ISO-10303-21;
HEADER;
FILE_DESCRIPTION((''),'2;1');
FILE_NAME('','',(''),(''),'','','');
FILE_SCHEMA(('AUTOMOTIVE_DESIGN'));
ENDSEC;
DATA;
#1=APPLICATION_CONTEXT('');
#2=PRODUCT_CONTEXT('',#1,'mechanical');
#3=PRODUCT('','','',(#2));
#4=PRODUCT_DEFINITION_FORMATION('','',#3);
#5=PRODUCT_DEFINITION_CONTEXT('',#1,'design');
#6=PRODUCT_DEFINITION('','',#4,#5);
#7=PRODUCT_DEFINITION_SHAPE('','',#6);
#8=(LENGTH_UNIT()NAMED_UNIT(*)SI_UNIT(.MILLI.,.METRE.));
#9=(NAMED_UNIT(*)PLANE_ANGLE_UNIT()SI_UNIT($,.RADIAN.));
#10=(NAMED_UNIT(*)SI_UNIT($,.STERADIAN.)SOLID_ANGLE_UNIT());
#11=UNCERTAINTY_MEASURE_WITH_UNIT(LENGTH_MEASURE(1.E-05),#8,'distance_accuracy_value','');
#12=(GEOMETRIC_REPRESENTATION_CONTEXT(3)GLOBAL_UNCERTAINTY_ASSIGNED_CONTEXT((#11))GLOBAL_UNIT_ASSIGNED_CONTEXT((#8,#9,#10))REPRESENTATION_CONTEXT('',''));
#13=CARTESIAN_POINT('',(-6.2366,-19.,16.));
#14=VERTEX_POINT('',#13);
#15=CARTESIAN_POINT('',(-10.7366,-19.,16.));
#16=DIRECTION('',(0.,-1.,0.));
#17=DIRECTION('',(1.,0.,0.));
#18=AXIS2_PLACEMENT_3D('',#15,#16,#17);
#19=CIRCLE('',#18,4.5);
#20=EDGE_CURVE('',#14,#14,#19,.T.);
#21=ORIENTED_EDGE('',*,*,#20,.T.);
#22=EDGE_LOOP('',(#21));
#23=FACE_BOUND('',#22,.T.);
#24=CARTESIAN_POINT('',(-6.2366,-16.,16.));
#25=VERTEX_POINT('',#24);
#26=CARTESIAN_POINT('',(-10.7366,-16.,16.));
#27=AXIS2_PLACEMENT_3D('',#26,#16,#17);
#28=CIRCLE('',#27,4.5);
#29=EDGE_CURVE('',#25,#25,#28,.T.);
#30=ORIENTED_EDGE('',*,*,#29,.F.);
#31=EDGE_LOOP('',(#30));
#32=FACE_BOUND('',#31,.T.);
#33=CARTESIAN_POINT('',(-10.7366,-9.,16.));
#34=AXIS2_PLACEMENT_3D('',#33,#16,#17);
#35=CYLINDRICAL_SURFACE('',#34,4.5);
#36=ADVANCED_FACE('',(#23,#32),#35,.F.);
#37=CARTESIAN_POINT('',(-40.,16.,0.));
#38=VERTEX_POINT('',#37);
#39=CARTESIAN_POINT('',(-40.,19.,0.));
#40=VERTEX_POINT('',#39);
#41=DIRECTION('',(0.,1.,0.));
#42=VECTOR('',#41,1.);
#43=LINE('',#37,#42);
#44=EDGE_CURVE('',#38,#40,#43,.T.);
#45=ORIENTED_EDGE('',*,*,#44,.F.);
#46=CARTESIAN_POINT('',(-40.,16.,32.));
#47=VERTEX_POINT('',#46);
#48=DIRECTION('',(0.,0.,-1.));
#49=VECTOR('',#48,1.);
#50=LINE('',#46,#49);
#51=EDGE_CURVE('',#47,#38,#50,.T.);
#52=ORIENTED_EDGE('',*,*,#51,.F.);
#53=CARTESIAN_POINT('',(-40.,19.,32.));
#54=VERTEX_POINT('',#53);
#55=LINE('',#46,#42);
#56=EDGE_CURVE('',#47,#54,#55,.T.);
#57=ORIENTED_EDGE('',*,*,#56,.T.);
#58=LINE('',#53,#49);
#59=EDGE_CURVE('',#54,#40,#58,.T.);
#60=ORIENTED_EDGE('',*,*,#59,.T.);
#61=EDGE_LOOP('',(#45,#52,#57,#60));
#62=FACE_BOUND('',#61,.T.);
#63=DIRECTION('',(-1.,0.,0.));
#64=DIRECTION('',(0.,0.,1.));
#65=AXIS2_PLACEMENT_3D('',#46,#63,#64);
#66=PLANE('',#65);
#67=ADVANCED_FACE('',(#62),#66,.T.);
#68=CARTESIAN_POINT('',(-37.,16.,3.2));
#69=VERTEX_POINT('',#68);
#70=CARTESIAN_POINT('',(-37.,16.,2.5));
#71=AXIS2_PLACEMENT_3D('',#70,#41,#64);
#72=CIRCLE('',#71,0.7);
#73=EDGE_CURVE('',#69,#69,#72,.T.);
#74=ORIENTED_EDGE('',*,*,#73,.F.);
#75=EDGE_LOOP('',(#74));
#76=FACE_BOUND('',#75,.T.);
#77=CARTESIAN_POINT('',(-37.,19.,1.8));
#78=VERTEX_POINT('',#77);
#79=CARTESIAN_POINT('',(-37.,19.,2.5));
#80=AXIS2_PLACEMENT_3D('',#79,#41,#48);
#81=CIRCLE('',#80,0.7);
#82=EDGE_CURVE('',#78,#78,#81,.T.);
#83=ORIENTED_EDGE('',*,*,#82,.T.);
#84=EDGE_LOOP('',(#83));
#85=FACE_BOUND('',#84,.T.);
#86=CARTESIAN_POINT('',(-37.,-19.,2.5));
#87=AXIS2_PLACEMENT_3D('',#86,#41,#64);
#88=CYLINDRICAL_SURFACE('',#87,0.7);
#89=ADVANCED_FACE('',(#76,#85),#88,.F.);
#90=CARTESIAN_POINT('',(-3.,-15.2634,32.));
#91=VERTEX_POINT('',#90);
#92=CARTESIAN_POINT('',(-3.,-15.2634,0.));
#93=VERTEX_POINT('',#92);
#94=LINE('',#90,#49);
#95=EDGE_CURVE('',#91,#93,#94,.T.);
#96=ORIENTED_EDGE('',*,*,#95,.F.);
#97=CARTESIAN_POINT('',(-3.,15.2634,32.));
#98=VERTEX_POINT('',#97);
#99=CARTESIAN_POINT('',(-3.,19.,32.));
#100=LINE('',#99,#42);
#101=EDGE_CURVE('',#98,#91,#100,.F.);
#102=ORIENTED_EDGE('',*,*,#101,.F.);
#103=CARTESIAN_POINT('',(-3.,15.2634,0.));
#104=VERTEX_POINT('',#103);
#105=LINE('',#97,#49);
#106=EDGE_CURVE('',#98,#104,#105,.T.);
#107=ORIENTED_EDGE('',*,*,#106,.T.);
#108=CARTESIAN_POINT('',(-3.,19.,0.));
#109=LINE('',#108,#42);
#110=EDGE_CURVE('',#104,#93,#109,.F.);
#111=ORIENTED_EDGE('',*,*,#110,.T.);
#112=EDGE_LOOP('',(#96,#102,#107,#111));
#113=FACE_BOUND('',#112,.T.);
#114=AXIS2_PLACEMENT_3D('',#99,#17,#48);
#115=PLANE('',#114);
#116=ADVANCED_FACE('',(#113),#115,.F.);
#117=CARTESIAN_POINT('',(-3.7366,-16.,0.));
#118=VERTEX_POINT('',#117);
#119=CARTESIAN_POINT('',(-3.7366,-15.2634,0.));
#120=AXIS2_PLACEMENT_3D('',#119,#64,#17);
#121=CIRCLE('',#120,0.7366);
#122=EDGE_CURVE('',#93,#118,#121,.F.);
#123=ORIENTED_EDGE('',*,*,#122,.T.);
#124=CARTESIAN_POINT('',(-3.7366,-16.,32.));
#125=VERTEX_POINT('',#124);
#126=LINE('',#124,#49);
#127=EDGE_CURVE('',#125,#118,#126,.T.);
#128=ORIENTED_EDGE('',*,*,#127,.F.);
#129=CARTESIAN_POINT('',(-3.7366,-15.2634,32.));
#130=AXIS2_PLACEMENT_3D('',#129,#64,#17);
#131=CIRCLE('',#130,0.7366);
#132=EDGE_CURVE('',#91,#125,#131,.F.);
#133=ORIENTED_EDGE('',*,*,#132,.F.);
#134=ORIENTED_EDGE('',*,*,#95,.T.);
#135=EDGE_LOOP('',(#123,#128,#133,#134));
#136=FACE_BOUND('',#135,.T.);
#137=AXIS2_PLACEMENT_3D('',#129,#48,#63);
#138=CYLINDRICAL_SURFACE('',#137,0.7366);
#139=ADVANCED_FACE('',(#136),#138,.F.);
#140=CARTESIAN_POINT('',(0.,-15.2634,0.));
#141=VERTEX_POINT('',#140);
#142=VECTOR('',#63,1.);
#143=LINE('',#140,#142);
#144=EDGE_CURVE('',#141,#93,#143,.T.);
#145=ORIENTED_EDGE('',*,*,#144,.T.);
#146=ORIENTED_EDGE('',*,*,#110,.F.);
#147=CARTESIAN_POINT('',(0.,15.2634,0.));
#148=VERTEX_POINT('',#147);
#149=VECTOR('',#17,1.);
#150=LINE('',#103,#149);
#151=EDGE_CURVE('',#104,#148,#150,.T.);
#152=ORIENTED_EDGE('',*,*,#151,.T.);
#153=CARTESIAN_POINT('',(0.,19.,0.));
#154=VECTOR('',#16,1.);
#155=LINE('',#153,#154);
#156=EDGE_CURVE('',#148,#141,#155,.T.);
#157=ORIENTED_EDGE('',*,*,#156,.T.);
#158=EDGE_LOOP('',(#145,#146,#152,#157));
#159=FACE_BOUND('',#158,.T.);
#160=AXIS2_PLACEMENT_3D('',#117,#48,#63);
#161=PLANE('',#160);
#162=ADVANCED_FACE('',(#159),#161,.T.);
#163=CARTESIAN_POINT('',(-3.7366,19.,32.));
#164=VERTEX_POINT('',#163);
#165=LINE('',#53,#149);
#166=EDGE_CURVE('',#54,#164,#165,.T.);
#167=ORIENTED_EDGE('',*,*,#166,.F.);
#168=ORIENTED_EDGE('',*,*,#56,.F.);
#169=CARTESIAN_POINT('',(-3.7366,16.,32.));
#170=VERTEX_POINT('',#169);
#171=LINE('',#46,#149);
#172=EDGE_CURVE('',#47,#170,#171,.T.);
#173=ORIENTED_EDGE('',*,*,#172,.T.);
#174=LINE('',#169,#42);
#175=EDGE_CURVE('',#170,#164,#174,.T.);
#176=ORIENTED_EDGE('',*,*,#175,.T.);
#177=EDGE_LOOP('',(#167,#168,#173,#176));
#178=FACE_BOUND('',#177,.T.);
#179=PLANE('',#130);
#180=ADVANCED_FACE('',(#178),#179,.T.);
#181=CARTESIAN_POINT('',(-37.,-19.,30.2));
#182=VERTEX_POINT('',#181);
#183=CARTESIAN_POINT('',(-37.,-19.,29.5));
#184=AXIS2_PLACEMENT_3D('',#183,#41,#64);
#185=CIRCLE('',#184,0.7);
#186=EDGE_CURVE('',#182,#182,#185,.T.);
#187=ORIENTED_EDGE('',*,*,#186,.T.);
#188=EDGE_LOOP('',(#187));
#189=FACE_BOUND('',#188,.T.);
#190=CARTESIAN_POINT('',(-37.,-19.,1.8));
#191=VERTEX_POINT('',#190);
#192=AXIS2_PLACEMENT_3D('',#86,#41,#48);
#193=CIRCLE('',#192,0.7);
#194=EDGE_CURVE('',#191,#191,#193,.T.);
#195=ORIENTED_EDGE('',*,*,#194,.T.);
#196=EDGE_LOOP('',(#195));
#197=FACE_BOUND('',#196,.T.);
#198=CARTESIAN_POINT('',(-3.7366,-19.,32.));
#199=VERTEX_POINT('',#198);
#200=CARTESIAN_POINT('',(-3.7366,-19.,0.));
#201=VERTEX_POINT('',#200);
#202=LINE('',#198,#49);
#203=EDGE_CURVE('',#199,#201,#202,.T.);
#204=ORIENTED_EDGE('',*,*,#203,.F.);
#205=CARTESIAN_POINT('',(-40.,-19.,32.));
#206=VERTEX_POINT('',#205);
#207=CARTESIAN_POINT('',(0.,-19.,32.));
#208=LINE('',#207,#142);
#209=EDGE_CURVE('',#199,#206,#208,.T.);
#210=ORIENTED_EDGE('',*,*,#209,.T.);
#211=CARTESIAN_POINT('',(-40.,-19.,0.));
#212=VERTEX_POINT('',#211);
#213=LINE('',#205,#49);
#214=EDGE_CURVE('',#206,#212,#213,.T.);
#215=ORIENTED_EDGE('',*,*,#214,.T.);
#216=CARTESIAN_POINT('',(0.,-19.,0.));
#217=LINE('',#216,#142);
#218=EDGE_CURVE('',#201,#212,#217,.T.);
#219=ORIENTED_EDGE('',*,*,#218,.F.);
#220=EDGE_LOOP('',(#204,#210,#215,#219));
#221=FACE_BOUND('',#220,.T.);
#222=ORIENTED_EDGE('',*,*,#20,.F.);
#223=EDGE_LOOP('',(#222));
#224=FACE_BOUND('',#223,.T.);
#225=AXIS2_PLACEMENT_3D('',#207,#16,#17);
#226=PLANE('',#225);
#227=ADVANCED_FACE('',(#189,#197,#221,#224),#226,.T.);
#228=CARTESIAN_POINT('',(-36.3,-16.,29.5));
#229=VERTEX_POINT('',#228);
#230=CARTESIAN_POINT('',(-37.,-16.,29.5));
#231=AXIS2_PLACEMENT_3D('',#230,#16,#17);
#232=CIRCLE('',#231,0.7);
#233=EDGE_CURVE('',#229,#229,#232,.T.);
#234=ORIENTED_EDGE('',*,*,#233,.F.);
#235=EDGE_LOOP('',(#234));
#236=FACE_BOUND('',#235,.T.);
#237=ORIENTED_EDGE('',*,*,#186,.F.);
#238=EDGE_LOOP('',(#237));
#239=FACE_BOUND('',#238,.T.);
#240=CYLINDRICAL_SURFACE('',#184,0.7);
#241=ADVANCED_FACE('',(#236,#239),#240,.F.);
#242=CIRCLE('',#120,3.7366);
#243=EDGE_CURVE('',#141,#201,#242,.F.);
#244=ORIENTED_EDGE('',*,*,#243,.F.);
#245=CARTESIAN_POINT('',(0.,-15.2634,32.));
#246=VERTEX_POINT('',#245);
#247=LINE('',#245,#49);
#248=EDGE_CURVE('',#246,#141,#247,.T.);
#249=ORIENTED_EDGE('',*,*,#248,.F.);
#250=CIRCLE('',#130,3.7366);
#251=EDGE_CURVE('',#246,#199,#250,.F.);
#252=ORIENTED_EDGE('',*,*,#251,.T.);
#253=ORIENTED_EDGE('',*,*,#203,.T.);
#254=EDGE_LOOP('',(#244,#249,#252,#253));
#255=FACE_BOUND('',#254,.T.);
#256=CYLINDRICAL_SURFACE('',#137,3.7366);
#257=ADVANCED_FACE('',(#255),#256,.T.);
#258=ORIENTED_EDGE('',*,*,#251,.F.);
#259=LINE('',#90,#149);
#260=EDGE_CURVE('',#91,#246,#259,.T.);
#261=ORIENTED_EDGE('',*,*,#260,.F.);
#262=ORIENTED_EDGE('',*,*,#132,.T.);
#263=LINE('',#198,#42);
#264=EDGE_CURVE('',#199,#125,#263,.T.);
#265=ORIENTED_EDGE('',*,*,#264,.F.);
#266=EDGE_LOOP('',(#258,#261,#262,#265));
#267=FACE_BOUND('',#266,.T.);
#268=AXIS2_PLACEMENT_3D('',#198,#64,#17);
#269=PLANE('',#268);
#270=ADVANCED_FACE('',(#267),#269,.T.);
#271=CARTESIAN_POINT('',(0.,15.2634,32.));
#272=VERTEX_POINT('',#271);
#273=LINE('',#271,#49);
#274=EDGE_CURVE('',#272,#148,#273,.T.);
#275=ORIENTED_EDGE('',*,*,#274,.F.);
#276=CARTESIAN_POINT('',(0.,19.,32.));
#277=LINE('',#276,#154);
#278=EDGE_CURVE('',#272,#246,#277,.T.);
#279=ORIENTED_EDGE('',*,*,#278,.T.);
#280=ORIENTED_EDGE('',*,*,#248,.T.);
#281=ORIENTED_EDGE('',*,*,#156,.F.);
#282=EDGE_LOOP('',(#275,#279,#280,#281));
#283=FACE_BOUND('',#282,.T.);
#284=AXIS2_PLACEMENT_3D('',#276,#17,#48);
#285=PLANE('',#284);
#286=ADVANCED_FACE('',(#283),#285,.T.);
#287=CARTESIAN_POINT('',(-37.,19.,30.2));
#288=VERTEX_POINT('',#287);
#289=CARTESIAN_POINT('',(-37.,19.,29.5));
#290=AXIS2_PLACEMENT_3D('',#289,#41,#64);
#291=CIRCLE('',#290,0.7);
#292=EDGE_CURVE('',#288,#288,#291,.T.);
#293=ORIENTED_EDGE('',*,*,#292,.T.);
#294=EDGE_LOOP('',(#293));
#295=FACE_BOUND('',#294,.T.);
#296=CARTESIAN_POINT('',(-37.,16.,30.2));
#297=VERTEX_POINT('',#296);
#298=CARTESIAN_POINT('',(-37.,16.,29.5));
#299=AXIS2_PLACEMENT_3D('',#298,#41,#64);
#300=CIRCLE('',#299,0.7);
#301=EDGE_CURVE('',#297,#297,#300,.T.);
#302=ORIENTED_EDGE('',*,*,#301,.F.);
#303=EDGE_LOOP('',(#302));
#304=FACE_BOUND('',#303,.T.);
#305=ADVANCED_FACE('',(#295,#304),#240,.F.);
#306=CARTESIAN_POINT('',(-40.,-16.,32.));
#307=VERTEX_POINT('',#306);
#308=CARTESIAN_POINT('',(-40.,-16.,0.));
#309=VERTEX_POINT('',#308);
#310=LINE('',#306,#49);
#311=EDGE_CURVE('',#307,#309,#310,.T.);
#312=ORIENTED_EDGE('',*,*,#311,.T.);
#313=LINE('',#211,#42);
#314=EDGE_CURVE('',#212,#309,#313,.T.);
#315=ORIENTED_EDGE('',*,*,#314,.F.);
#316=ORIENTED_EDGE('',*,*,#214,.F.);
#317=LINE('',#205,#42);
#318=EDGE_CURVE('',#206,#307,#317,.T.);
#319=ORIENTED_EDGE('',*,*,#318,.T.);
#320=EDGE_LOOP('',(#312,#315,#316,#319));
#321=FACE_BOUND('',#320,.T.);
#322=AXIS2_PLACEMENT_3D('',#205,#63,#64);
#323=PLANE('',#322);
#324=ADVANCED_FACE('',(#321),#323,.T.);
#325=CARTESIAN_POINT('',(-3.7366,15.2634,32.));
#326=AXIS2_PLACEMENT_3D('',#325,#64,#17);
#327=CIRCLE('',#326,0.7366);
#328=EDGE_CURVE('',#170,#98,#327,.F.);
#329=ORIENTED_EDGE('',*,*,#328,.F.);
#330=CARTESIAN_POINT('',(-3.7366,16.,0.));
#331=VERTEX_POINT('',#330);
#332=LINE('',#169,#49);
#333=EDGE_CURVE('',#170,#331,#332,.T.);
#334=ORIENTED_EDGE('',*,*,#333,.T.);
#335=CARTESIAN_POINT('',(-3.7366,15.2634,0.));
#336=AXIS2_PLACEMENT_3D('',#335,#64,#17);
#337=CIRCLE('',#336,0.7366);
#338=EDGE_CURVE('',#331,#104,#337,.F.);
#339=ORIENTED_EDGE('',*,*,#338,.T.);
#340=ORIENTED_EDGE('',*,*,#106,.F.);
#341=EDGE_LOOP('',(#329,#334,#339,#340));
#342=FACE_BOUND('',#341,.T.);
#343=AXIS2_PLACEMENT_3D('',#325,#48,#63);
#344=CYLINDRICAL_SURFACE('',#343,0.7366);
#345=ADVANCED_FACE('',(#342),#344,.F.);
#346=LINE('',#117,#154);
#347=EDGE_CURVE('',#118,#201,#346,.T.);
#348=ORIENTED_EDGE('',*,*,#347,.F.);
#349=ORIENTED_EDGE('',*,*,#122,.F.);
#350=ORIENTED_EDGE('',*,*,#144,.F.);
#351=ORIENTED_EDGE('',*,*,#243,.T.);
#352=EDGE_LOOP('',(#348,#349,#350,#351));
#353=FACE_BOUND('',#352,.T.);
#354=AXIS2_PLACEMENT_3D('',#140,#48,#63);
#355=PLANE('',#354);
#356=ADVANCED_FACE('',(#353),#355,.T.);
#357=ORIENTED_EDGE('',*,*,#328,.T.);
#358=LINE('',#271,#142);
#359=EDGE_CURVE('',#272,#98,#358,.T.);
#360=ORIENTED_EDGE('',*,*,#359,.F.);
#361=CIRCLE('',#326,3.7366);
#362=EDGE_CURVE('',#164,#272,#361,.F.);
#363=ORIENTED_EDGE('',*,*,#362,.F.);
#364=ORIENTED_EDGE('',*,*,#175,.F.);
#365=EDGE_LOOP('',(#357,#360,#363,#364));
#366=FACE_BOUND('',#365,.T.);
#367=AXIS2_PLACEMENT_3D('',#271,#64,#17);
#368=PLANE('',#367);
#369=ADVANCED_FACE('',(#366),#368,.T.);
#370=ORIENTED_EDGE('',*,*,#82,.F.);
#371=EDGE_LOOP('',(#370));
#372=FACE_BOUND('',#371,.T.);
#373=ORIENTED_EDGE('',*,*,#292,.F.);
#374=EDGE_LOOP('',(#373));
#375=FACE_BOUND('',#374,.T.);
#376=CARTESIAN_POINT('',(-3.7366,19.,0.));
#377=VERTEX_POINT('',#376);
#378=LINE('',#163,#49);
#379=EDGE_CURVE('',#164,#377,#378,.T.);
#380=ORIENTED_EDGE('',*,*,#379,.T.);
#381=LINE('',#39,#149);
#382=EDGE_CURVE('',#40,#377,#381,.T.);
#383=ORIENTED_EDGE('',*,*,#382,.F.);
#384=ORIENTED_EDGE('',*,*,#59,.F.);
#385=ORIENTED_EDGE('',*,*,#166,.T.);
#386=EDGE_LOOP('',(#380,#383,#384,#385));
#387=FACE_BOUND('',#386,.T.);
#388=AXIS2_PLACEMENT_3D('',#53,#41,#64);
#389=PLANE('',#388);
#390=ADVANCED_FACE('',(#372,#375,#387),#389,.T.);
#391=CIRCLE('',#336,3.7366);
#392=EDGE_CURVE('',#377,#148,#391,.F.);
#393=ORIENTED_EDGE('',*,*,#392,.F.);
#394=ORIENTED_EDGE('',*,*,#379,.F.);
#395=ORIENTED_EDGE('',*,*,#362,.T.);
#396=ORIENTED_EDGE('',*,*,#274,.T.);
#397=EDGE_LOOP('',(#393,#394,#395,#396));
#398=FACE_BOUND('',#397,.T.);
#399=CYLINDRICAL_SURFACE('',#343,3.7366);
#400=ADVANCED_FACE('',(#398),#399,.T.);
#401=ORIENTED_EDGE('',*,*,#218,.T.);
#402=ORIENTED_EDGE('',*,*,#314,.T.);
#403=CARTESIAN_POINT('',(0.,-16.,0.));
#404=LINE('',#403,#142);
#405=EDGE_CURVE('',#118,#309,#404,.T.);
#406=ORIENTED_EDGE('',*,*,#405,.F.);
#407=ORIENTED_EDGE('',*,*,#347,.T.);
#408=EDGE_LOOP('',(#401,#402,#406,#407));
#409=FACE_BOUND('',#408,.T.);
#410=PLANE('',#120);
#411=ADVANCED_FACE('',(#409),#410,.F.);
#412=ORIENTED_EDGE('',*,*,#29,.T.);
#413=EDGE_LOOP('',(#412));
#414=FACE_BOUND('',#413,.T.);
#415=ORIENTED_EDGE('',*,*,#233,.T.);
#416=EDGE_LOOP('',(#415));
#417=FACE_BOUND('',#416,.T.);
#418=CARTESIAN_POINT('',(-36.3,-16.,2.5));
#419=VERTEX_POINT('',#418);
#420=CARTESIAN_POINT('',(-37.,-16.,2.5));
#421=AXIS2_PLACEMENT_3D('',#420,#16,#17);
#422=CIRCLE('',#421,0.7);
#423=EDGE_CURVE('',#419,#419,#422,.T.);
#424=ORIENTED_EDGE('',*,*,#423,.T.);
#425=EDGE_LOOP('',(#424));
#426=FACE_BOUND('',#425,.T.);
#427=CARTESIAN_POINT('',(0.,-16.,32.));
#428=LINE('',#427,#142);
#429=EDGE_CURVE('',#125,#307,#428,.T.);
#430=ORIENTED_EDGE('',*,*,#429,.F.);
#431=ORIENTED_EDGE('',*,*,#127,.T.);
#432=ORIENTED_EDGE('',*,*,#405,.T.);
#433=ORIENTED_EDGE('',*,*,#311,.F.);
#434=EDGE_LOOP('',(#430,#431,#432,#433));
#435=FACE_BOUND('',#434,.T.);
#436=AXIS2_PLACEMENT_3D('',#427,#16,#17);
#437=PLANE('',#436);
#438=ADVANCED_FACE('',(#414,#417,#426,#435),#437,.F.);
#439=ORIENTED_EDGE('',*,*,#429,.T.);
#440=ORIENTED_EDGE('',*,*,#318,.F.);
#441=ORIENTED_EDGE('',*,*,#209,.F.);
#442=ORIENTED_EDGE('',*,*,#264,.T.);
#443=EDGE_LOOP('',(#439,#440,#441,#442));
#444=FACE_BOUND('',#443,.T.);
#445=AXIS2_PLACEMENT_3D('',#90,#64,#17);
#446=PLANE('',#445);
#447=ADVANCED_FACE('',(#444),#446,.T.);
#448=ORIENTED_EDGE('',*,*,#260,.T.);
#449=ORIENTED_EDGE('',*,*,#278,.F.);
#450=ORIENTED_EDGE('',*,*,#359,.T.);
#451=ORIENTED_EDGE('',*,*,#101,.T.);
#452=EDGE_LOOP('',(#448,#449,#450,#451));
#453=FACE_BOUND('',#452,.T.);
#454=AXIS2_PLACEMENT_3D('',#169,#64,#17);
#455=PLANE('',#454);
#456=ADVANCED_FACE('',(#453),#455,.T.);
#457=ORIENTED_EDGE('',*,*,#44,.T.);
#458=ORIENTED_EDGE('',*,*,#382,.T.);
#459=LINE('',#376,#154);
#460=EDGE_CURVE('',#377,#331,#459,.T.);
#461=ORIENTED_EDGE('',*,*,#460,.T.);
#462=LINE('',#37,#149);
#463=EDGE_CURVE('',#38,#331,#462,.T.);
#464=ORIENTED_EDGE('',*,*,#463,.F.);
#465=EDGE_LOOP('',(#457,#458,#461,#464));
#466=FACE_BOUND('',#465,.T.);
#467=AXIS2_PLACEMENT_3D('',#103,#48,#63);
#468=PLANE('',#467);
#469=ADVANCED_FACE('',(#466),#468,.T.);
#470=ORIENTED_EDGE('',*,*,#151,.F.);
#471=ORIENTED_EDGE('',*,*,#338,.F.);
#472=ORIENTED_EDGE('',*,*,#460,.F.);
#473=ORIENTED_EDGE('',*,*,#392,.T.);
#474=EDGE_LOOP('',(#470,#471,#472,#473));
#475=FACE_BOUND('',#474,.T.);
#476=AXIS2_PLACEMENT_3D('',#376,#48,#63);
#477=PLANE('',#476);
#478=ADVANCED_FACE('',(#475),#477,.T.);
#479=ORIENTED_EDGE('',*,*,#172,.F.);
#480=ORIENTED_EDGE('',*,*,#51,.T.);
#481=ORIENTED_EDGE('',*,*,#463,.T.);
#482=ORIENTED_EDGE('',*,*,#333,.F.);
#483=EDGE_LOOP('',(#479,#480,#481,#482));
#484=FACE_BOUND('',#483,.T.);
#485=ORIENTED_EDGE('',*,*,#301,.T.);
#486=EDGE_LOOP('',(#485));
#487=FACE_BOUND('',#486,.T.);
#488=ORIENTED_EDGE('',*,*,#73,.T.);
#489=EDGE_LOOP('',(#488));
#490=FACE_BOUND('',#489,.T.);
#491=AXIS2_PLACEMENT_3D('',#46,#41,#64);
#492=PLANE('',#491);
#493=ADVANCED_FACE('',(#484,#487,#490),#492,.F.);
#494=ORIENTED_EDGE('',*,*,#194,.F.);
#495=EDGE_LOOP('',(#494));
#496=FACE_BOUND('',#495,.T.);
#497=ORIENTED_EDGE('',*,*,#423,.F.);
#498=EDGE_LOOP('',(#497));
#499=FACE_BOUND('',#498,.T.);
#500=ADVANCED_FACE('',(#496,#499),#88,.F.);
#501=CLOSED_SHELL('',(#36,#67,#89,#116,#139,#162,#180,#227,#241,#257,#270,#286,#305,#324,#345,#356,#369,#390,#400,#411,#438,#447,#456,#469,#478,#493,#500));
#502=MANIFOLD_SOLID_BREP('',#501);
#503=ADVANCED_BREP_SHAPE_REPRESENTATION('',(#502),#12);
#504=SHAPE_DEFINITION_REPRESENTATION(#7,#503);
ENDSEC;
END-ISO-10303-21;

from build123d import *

# Parameters (mm, degrees)
T_LE_DE_BASE_PLI_E1_DEPTH = 32
ESQUISSE6_R               = 4.5
ENL_V_MAT_EXTRU_1_DEPTH   = 10
ESQUISSE7_R               = 0.7
ENL_V_MAT_EXTRU_2_DEPTH   = 64.780874876


# Sheet-metal steps are written as plain solids
with BuildPart() as part:
    # Esquisse1 → Tôle de base pliée1 (new body)
    with BuildSketch(Plane.XY):
        with BuildLine():
            Line((-40, 19), (-3.7366, 19))
            ThreePointArc((-3.7366, 19), (-1.094424801, 17.905575199), (0, 15.2634))
            Line((0, 15.2634), (0, -15.2634))
            ThreePointArc((0, -15.2634), (-1.094424801, -17.905575199), (-3.7366, -19))
            Line((-3.7366, -19), (-40, -19))
            Line((-40, -19), (-40, -16))
            Line((-40, -16), (-3.7366, -16))
            ThreePointArc((-3.7366, -16), (-3.215745145, -15.784254855), (-3, -15.2634))
            Line((-3, -15.2634), (-3, 15.2634))
            ThreePointArc((-3, 15.2634), (-3.215745145, 15.784254855), (-3.7366, 16))
            Line((-3.7366, 16), (-40, 16))
            Line((-40, 16), (-40, 19))
        make_face()
    extrude(amount=T_LE_DE_BASE_PLI_E1_DEPTH)

    # Esquisse6 → Enlèv. mat.-Extru.1 (cut)
    with BuildSketch(Plane.XZ.offset(19)):
        with Locations((-10.7366, 16)):
            Circle(ESQUISSE6_R)
    extrude(amount=-ENL_V_MAT_EXTRU_1_DEPTH, mode=Mode.SUBTRACT)

    # Esquisse7 → Enlèv. mat.-Extru.2 (cut, through all)
    with BuildSketch(Plane(origin=(0, 19, 0), x_dir=(1, 0, 0), z_dir=(0, 1, 0))):
        with Locations(Location((-37, -29.5, 0), (0, 0, 270))):
            Circle(ESQUISSE7_R)
        with Locations(Location((-37, -2.5, 0), (0, 0, 270))):
            Circle(ESQUISSE7_R)
    extrude(amount=-ENL_V_MAT_EXTRU_2_DEPTH, mode=Mode.SUBTRACT)


solid = part.part
